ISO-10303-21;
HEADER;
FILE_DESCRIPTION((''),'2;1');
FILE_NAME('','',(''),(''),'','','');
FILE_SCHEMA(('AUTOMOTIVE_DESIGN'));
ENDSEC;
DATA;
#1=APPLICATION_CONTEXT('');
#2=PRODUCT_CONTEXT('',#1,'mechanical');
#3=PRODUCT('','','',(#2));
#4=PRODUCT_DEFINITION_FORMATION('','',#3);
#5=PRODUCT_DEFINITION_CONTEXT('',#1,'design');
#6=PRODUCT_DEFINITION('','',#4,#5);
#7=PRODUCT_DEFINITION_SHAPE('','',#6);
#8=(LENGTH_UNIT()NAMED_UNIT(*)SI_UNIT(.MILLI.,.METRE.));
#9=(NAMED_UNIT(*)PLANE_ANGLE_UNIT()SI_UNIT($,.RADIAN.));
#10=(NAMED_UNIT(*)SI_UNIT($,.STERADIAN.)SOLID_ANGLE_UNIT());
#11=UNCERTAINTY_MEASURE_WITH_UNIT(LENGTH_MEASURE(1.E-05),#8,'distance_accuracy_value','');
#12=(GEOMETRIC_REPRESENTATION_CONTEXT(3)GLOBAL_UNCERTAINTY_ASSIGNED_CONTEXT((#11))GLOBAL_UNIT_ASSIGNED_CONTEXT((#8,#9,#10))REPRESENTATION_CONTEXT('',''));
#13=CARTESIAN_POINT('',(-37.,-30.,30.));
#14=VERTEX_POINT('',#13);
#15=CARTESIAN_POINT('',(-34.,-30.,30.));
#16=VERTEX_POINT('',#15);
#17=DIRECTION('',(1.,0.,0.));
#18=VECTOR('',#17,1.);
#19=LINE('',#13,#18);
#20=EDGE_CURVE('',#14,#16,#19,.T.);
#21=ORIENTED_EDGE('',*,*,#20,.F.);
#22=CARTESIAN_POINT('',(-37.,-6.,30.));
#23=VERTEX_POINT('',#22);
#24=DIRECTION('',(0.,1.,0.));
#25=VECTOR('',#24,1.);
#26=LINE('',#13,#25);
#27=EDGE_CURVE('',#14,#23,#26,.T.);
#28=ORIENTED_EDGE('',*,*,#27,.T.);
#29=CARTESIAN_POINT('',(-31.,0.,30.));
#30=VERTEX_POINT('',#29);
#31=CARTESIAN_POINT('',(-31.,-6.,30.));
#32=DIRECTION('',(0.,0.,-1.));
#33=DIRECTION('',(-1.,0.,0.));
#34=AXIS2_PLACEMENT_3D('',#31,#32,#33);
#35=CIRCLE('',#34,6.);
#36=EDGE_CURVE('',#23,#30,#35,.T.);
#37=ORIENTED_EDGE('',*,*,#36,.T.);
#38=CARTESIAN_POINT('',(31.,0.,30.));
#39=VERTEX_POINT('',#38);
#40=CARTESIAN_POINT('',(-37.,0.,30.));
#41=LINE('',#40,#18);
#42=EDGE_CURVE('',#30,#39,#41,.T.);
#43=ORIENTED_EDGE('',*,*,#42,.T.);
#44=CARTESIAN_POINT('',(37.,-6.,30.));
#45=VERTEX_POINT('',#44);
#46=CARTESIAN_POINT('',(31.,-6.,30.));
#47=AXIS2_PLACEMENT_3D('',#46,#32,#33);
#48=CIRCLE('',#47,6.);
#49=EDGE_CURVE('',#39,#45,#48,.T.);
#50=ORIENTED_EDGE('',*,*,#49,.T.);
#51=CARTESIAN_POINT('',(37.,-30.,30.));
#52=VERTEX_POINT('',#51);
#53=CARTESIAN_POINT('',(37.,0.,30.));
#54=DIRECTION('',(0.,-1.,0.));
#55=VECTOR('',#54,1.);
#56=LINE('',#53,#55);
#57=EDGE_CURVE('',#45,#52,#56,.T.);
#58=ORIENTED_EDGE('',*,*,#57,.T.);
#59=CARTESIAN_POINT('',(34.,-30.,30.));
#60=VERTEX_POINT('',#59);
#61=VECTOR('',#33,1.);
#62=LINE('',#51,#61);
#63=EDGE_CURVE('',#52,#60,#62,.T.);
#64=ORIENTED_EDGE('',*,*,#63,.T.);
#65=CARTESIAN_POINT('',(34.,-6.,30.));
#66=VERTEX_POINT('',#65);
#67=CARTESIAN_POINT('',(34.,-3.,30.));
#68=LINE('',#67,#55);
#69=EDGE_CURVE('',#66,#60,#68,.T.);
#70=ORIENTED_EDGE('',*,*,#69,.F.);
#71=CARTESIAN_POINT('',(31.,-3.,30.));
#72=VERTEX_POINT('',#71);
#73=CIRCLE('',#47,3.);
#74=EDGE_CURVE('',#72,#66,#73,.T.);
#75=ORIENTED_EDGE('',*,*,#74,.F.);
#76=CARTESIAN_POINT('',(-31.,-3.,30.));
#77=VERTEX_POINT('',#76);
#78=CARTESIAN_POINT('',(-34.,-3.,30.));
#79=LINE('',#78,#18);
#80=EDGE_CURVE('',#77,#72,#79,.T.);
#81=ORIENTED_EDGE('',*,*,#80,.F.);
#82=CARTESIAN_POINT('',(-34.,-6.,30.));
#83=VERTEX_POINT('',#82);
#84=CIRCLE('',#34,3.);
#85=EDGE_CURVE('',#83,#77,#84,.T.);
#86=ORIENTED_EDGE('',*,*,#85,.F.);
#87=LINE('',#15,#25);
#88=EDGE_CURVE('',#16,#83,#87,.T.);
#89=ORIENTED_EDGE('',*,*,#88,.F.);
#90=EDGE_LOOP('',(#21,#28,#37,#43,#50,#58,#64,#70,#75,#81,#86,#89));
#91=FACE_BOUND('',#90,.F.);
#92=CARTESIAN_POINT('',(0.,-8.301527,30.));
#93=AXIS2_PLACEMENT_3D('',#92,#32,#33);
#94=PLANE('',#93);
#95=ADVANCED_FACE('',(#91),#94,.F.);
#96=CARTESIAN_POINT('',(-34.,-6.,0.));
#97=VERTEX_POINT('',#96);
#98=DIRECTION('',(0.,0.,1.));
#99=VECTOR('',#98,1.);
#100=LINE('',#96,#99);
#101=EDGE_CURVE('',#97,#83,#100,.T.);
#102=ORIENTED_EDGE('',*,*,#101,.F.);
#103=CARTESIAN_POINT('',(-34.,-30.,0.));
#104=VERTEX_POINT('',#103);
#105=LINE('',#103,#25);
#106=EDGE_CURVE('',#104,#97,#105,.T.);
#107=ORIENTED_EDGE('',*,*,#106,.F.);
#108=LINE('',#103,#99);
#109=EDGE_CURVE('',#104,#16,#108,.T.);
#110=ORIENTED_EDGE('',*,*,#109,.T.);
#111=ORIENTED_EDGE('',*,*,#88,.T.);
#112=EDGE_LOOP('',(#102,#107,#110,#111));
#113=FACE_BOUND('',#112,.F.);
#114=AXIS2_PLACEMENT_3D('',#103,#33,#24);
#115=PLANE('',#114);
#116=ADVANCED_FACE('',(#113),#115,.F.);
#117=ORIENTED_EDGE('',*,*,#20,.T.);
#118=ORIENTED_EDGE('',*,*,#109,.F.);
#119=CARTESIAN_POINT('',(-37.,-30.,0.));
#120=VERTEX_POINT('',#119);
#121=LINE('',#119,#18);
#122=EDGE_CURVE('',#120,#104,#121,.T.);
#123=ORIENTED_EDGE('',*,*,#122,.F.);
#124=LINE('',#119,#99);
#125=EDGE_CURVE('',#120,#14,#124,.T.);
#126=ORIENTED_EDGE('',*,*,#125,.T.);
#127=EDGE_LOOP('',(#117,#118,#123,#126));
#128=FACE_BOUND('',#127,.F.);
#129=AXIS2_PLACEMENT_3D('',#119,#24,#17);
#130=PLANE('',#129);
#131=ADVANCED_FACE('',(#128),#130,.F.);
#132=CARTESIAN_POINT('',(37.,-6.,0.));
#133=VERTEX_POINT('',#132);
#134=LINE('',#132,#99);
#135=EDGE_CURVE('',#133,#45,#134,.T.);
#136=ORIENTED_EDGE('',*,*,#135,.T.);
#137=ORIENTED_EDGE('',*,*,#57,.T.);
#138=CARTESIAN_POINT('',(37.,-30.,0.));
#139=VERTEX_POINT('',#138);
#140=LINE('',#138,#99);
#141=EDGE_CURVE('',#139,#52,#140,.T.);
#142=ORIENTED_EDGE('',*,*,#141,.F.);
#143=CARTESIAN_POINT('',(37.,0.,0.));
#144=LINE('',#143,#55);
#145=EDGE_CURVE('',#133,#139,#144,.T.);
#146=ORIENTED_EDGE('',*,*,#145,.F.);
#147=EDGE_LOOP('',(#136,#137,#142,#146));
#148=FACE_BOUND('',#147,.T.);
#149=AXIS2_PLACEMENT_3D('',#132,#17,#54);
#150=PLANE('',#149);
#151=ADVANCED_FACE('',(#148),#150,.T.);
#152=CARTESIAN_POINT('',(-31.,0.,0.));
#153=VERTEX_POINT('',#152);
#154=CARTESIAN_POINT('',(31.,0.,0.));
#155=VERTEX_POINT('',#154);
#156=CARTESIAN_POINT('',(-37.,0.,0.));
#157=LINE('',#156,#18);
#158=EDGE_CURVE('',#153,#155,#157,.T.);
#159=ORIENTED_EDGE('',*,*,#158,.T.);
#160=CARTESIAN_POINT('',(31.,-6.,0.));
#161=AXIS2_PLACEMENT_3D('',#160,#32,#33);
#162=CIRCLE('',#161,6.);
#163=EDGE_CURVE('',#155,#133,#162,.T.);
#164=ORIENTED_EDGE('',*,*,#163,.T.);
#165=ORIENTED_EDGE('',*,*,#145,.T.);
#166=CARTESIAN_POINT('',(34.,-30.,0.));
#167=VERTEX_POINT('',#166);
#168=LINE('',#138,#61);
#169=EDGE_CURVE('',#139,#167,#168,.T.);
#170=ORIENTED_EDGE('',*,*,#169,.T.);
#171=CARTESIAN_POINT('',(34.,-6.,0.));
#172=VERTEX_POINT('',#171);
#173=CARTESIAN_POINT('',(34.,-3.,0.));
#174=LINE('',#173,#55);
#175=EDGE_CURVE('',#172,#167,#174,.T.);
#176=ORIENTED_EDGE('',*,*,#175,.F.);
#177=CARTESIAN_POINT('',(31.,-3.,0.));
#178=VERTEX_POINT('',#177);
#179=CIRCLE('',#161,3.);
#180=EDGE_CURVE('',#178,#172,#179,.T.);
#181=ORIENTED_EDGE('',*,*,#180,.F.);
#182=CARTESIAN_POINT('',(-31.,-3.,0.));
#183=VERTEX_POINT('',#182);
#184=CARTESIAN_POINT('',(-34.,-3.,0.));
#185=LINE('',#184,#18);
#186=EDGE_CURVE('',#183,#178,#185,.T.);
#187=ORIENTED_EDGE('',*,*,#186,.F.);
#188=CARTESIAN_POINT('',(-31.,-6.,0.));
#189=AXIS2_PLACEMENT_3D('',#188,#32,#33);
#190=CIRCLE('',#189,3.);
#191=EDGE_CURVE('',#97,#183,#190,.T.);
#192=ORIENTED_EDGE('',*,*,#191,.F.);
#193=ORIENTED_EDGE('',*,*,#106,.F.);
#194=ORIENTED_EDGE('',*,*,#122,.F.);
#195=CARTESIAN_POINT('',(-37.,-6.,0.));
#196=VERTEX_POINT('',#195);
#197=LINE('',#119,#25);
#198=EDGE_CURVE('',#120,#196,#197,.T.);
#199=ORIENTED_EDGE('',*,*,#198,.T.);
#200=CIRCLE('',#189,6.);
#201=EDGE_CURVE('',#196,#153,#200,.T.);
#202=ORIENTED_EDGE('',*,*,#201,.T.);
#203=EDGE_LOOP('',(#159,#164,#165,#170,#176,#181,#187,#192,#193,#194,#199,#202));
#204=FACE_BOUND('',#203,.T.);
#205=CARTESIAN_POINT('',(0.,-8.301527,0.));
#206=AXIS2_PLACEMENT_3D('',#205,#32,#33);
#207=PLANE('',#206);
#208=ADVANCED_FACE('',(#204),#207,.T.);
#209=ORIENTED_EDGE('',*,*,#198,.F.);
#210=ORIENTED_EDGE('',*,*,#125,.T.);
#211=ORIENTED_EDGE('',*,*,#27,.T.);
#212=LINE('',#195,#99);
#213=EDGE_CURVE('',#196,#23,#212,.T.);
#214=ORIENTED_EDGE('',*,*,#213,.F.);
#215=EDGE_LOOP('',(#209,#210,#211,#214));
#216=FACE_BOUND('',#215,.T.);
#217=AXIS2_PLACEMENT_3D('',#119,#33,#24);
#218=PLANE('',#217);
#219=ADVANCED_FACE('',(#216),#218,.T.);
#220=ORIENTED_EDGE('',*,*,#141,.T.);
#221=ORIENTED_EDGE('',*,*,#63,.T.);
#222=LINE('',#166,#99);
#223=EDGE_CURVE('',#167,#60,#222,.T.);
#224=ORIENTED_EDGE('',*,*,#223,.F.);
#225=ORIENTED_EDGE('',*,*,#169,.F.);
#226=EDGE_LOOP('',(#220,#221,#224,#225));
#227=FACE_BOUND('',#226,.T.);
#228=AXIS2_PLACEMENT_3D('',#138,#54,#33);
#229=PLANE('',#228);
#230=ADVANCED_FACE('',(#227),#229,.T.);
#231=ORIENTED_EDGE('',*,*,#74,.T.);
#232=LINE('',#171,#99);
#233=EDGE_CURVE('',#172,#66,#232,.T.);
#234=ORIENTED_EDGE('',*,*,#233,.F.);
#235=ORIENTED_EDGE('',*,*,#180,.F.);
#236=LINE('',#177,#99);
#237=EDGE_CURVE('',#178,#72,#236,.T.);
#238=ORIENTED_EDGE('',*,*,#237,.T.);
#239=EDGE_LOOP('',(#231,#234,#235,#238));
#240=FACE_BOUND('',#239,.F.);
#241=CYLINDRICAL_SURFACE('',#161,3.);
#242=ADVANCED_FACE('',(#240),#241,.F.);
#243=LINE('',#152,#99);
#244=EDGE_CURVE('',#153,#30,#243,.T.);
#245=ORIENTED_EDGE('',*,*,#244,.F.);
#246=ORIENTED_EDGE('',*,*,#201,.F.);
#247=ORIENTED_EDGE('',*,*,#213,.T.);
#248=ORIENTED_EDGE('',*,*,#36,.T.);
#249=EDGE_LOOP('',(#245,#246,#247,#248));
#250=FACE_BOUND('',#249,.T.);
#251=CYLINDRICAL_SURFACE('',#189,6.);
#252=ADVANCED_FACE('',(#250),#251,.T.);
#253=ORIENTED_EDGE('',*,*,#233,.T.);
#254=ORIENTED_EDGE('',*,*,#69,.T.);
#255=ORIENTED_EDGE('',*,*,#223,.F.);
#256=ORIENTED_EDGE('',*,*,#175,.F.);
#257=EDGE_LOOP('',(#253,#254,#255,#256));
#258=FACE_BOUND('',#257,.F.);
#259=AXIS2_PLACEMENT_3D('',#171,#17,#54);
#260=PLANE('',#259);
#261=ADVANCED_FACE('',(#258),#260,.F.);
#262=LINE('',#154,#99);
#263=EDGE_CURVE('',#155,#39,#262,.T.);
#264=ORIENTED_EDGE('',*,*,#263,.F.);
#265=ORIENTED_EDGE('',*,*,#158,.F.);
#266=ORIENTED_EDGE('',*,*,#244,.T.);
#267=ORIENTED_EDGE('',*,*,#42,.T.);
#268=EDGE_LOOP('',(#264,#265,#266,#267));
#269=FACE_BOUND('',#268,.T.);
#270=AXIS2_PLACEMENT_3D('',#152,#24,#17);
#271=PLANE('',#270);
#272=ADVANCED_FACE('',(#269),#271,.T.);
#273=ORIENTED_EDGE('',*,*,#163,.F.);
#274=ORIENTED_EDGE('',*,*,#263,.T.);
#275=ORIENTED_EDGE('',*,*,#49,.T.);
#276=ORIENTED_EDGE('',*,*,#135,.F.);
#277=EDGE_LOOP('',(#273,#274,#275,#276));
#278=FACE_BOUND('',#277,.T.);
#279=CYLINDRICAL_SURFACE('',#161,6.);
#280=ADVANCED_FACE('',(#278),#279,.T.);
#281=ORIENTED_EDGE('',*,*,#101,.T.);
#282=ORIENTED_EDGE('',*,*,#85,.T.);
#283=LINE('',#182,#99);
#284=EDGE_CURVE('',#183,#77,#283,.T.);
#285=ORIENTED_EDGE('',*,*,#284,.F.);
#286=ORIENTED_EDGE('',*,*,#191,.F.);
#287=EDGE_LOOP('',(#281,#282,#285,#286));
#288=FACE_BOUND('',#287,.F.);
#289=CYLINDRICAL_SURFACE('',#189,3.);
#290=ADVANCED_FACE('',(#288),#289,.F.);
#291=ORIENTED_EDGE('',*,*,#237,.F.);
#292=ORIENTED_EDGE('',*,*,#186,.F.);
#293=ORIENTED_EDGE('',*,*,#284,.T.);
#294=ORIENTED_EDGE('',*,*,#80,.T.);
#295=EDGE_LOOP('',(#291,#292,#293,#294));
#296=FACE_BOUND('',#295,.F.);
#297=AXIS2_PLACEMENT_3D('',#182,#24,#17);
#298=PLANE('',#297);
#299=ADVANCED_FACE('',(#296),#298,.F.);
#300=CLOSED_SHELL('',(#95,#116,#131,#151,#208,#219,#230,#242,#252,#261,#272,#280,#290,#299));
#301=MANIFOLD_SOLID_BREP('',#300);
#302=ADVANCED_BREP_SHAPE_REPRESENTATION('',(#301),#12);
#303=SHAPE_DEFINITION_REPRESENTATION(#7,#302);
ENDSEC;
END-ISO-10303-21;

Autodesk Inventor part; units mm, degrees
ref_plane "YZ Plane" through (0, 0, 0) normal (1, 0, 0) x (0, 1, 0)
ref_plane "XZ Plane" through (0, 0, 0) normal (0, 1, 0) x (-1, 0, 0)
ref_plane "XY Plane" through (0, 0, 0) normal (0, 0, 1) x (1, 0, 0)
sketch "Sketch1" plane through (0, 0, 0) normal (0, 0, 1) x (1, 0, 0)
  line L0 (-37, -30) -> (-37, 0)
  line L1 (-37, 0) -> (37, 0)
  line L2 (37, 0) -> (37, -30)
  point P0 (0, 0)
  point P1 (0, 0)
  dimension "d0" = 30
  dimension "d1" = 74
contour flange "Contour Flange1" sketch "Sketch1" thickness 3 bend radius 3 width 30 along (0, 0, 1) mid plane no both sides no wall seen from (-37, -15, 0) lies toward (1, 0, 0) curves L0 L1 L2
bend "Bend1"
corner "Corner1"
equation "\"d4\" = Thickness"
equation "\"d5\" = BendReliefWidth"
equation "\"d6\" = BendReliefDepth"
equation "\"d7\" = MinimumRemnant"
equation "\"d8\" = TransitionRadius"
equation "\"d10\" = BendRadius"
equation "\"d12\" = CornerReliefSize"
equation "\"d13\" = GapSize"
equation "\"d14\" = JacobiRadiusSize"
equation "\"BendRadius\" = Thickness"
equation "\"BendReliefWidth\" = Thickness"
equation "\"BendReliefDepth\" = 0.5 * Thickness"
equation "\"CornerReliefSize\" = 4 * Thickness"
equation "\"MinimumRemnant\" = 2 * Thickness"
equation "\"TransitionRadius\" = BendRadius"
equation "\"JacobiRadiusSize\" = BendRadius"
equation "\"GapSize\" = Thickness"
equation "\"Thickness\" = 3"
properties part number "DMF 01 55 Amplifier tape v2.1"
